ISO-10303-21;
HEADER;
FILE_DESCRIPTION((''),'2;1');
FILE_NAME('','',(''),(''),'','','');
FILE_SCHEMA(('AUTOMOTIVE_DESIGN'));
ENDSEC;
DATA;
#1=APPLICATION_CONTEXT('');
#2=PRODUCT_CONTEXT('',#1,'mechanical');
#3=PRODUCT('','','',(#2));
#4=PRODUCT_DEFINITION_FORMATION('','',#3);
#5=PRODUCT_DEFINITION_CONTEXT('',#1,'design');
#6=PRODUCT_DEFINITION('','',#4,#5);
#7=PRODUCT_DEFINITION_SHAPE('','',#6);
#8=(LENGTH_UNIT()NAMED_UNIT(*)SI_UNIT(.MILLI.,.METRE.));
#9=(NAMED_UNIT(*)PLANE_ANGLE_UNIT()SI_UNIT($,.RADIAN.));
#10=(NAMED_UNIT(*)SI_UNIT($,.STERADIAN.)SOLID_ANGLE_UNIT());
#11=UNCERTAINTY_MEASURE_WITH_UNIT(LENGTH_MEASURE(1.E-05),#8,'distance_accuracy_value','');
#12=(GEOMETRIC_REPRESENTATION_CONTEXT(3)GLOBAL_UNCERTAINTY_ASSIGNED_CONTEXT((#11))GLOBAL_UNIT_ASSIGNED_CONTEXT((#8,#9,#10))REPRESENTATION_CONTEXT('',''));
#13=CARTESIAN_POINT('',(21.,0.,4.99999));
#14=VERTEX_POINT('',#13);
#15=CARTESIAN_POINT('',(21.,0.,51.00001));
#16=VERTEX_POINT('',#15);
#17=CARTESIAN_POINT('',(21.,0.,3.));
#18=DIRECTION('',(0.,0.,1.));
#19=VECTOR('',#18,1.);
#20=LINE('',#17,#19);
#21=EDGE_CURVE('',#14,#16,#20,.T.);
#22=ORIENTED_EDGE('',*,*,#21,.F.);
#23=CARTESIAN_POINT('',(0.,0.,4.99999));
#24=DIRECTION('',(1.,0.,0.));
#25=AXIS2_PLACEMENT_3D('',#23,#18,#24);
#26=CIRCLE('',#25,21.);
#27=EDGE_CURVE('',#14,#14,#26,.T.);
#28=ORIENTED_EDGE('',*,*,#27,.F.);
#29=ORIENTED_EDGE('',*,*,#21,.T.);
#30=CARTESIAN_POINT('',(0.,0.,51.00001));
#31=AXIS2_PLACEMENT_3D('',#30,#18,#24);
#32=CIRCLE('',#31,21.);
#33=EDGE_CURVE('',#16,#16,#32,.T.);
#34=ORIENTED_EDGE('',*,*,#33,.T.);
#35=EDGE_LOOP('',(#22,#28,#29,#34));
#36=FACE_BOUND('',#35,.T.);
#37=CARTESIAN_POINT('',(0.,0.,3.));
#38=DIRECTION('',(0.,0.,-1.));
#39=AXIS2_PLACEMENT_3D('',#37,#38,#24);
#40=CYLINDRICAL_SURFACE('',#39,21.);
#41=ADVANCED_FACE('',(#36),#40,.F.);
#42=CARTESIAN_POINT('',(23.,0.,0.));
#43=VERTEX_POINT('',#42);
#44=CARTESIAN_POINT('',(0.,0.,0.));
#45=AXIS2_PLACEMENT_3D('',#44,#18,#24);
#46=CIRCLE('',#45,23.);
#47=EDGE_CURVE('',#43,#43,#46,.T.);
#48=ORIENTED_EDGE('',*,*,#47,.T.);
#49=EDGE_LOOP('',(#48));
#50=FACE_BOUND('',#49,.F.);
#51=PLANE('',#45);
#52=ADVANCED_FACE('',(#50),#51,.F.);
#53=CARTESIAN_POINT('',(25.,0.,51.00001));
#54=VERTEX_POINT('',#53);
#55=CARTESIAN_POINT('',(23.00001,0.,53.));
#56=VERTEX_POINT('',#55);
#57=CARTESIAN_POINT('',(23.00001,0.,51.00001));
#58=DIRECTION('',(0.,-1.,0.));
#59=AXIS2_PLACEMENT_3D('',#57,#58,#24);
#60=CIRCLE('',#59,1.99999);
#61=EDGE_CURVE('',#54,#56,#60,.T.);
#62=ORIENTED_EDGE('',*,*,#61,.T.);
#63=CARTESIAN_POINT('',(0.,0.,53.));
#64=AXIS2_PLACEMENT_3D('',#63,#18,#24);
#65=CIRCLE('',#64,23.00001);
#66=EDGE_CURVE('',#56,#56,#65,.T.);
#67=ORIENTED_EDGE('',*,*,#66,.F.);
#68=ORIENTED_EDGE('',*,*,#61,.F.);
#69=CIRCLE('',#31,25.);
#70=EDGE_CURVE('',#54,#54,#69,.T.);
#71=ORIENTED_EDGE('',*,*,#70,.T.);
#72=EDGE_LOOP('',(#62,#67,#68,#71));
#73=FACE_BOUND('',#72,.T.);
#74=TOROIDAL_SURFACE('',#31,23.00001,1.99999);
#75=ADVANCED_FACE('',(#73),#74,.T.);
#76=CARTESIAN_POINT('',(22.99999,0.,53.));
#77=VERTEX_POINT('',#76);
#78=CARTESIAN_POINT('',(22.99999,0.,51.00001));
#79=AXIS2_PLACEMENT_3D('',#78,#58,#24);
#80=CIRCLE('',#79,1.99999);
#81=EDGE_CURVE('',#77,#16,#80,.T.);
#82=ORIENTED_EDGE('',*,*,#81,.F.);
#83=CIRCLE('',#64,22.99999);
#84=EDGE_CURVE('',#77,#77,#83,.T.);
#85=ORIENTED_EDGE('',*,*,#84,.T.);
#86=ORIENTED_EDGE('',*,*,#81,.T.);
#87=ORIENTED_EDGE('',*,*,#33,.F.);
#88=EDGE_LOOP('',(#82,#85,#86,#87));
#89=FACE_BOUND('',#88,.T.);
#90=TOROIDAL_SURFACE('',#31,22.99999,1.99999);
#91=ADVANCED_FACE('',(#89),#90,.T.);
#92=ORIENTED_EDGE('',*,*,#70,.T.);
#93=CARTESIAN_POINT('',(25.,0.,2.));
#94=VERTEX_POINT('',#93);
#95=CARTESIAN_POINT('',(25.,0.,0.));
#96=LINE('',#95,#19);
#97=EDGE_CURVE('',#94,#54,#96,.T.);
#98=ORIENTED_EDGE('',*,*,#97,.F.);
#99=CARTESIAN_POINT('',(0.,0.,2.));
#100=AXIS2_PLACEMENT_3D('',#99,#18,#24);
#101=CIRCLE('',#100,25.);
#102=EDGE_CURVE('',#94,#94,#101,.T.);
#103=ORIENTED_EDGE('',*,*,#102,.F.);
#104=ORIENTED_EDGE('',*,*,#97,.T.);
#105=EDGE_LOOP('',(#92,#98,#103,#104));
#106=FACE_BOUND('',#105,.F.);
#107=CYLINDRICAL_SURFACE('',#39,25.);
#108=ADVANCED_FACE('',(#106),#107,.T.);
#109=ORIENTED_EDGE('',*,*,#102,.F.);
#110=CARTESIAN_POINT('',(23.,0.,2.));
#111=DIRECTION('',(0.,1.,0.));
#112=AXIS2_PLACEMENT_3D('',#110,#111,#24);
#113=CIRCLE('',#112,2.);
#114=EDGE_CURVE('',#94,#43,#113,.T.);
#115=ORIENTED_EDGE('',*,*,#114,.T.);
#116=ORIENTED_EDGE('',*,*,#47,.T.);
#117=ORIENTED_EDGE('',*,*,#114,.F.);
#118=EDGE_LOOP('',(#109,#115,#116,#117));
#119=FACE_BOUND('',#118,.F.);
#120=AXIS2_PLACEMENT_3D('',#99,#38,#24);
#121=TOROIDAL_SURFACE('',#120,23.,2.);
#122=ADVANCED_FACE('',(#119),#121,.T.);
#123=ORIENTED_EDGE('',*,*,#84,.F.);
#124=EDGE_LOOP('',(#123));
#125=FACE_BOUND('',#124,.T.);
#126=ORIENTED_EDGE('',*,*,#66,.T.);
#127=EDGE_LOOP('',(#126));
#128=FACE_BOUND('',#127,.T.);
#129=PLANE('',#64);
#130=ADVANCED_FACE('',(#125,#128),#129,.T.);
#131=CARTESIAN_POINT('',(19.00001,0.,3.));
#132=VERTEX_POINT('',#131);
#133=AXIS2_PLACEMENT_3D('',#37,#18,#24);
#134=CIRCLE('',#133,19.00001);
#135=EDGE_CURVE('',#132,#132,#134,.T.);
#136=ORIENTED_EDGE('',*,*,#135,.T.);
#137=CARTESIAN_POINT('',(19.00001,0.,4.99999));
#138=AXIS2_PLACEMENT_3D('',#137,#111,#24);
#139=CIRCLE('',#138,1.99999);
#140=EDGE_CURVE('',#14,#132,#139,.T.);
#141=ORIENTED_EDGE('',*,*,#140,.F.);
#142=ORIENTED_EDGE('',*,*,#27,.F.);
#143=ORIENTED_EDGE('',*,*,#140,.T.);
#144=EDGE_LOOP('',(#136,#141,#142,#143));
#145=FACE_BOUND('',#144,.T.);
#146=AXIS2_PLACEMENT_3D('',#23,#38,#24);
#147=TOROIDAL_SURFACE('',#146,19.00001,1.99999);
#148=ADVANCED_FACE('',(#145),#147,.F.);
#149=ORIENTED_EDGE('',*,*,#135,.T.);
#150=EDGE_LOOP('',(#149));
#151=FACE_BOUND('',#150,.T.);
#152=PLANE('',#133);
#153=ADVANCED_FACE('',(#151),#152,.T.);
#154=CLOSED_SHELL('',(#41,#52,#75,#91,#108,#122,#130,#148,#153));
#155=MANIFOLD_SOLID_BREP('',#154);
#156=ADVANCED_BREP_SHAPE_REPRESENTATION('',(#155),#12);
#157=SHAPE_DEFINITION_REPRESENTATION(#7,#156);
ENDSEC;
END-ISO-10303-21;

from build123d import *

# Parameters (mm, degrees)
F0_R     = 25
F1_DEPTH = 3
F2_R     = 25
F2_R_2   = 21
F3_DEPTH = 50
F4_R     = 1.99999
F5_R     = 2


# Not quite as in the source:
# - a fillet or chamfer is up to 0.001 mm smaller than in the source, because OpenCascade refuses the exact size


with BuildPart() as f1:
    # F0 (on Top) → F1 (new body)
    with BuildSketch(Plane.XY):
        Circle(F0_R)
    extrude(amount=F1_DEPTH)

    # F2 (on face) → F3 (join)
    with BuildSketch(Plane.XY.offset(3)):
        Circle(F2_R)
        Circle(F2_R_2, mode=Mode.SUBTRACT)
    extrude(amount=F3_DEPTH)

    # F4 (radius 2 in the source; OpenCascade refuses exactly that, so slightly less here)
    f4_edges = [f1.edges().sort_by_distance(p)[0] for p in [
        (-25, 0, 53),
        (-21, 0, 53),
        (-21, 0, 3),
    ]]
    fillet(f4_edges, radius=F4_R)

    # F5
    f5_edges = [f1.edges().sort_by_distance(p)[0] for p in [
        (-25, 0, 0),
    ]]
    fillet(f5_edges, radius=F5_R)


solid = f1.part
